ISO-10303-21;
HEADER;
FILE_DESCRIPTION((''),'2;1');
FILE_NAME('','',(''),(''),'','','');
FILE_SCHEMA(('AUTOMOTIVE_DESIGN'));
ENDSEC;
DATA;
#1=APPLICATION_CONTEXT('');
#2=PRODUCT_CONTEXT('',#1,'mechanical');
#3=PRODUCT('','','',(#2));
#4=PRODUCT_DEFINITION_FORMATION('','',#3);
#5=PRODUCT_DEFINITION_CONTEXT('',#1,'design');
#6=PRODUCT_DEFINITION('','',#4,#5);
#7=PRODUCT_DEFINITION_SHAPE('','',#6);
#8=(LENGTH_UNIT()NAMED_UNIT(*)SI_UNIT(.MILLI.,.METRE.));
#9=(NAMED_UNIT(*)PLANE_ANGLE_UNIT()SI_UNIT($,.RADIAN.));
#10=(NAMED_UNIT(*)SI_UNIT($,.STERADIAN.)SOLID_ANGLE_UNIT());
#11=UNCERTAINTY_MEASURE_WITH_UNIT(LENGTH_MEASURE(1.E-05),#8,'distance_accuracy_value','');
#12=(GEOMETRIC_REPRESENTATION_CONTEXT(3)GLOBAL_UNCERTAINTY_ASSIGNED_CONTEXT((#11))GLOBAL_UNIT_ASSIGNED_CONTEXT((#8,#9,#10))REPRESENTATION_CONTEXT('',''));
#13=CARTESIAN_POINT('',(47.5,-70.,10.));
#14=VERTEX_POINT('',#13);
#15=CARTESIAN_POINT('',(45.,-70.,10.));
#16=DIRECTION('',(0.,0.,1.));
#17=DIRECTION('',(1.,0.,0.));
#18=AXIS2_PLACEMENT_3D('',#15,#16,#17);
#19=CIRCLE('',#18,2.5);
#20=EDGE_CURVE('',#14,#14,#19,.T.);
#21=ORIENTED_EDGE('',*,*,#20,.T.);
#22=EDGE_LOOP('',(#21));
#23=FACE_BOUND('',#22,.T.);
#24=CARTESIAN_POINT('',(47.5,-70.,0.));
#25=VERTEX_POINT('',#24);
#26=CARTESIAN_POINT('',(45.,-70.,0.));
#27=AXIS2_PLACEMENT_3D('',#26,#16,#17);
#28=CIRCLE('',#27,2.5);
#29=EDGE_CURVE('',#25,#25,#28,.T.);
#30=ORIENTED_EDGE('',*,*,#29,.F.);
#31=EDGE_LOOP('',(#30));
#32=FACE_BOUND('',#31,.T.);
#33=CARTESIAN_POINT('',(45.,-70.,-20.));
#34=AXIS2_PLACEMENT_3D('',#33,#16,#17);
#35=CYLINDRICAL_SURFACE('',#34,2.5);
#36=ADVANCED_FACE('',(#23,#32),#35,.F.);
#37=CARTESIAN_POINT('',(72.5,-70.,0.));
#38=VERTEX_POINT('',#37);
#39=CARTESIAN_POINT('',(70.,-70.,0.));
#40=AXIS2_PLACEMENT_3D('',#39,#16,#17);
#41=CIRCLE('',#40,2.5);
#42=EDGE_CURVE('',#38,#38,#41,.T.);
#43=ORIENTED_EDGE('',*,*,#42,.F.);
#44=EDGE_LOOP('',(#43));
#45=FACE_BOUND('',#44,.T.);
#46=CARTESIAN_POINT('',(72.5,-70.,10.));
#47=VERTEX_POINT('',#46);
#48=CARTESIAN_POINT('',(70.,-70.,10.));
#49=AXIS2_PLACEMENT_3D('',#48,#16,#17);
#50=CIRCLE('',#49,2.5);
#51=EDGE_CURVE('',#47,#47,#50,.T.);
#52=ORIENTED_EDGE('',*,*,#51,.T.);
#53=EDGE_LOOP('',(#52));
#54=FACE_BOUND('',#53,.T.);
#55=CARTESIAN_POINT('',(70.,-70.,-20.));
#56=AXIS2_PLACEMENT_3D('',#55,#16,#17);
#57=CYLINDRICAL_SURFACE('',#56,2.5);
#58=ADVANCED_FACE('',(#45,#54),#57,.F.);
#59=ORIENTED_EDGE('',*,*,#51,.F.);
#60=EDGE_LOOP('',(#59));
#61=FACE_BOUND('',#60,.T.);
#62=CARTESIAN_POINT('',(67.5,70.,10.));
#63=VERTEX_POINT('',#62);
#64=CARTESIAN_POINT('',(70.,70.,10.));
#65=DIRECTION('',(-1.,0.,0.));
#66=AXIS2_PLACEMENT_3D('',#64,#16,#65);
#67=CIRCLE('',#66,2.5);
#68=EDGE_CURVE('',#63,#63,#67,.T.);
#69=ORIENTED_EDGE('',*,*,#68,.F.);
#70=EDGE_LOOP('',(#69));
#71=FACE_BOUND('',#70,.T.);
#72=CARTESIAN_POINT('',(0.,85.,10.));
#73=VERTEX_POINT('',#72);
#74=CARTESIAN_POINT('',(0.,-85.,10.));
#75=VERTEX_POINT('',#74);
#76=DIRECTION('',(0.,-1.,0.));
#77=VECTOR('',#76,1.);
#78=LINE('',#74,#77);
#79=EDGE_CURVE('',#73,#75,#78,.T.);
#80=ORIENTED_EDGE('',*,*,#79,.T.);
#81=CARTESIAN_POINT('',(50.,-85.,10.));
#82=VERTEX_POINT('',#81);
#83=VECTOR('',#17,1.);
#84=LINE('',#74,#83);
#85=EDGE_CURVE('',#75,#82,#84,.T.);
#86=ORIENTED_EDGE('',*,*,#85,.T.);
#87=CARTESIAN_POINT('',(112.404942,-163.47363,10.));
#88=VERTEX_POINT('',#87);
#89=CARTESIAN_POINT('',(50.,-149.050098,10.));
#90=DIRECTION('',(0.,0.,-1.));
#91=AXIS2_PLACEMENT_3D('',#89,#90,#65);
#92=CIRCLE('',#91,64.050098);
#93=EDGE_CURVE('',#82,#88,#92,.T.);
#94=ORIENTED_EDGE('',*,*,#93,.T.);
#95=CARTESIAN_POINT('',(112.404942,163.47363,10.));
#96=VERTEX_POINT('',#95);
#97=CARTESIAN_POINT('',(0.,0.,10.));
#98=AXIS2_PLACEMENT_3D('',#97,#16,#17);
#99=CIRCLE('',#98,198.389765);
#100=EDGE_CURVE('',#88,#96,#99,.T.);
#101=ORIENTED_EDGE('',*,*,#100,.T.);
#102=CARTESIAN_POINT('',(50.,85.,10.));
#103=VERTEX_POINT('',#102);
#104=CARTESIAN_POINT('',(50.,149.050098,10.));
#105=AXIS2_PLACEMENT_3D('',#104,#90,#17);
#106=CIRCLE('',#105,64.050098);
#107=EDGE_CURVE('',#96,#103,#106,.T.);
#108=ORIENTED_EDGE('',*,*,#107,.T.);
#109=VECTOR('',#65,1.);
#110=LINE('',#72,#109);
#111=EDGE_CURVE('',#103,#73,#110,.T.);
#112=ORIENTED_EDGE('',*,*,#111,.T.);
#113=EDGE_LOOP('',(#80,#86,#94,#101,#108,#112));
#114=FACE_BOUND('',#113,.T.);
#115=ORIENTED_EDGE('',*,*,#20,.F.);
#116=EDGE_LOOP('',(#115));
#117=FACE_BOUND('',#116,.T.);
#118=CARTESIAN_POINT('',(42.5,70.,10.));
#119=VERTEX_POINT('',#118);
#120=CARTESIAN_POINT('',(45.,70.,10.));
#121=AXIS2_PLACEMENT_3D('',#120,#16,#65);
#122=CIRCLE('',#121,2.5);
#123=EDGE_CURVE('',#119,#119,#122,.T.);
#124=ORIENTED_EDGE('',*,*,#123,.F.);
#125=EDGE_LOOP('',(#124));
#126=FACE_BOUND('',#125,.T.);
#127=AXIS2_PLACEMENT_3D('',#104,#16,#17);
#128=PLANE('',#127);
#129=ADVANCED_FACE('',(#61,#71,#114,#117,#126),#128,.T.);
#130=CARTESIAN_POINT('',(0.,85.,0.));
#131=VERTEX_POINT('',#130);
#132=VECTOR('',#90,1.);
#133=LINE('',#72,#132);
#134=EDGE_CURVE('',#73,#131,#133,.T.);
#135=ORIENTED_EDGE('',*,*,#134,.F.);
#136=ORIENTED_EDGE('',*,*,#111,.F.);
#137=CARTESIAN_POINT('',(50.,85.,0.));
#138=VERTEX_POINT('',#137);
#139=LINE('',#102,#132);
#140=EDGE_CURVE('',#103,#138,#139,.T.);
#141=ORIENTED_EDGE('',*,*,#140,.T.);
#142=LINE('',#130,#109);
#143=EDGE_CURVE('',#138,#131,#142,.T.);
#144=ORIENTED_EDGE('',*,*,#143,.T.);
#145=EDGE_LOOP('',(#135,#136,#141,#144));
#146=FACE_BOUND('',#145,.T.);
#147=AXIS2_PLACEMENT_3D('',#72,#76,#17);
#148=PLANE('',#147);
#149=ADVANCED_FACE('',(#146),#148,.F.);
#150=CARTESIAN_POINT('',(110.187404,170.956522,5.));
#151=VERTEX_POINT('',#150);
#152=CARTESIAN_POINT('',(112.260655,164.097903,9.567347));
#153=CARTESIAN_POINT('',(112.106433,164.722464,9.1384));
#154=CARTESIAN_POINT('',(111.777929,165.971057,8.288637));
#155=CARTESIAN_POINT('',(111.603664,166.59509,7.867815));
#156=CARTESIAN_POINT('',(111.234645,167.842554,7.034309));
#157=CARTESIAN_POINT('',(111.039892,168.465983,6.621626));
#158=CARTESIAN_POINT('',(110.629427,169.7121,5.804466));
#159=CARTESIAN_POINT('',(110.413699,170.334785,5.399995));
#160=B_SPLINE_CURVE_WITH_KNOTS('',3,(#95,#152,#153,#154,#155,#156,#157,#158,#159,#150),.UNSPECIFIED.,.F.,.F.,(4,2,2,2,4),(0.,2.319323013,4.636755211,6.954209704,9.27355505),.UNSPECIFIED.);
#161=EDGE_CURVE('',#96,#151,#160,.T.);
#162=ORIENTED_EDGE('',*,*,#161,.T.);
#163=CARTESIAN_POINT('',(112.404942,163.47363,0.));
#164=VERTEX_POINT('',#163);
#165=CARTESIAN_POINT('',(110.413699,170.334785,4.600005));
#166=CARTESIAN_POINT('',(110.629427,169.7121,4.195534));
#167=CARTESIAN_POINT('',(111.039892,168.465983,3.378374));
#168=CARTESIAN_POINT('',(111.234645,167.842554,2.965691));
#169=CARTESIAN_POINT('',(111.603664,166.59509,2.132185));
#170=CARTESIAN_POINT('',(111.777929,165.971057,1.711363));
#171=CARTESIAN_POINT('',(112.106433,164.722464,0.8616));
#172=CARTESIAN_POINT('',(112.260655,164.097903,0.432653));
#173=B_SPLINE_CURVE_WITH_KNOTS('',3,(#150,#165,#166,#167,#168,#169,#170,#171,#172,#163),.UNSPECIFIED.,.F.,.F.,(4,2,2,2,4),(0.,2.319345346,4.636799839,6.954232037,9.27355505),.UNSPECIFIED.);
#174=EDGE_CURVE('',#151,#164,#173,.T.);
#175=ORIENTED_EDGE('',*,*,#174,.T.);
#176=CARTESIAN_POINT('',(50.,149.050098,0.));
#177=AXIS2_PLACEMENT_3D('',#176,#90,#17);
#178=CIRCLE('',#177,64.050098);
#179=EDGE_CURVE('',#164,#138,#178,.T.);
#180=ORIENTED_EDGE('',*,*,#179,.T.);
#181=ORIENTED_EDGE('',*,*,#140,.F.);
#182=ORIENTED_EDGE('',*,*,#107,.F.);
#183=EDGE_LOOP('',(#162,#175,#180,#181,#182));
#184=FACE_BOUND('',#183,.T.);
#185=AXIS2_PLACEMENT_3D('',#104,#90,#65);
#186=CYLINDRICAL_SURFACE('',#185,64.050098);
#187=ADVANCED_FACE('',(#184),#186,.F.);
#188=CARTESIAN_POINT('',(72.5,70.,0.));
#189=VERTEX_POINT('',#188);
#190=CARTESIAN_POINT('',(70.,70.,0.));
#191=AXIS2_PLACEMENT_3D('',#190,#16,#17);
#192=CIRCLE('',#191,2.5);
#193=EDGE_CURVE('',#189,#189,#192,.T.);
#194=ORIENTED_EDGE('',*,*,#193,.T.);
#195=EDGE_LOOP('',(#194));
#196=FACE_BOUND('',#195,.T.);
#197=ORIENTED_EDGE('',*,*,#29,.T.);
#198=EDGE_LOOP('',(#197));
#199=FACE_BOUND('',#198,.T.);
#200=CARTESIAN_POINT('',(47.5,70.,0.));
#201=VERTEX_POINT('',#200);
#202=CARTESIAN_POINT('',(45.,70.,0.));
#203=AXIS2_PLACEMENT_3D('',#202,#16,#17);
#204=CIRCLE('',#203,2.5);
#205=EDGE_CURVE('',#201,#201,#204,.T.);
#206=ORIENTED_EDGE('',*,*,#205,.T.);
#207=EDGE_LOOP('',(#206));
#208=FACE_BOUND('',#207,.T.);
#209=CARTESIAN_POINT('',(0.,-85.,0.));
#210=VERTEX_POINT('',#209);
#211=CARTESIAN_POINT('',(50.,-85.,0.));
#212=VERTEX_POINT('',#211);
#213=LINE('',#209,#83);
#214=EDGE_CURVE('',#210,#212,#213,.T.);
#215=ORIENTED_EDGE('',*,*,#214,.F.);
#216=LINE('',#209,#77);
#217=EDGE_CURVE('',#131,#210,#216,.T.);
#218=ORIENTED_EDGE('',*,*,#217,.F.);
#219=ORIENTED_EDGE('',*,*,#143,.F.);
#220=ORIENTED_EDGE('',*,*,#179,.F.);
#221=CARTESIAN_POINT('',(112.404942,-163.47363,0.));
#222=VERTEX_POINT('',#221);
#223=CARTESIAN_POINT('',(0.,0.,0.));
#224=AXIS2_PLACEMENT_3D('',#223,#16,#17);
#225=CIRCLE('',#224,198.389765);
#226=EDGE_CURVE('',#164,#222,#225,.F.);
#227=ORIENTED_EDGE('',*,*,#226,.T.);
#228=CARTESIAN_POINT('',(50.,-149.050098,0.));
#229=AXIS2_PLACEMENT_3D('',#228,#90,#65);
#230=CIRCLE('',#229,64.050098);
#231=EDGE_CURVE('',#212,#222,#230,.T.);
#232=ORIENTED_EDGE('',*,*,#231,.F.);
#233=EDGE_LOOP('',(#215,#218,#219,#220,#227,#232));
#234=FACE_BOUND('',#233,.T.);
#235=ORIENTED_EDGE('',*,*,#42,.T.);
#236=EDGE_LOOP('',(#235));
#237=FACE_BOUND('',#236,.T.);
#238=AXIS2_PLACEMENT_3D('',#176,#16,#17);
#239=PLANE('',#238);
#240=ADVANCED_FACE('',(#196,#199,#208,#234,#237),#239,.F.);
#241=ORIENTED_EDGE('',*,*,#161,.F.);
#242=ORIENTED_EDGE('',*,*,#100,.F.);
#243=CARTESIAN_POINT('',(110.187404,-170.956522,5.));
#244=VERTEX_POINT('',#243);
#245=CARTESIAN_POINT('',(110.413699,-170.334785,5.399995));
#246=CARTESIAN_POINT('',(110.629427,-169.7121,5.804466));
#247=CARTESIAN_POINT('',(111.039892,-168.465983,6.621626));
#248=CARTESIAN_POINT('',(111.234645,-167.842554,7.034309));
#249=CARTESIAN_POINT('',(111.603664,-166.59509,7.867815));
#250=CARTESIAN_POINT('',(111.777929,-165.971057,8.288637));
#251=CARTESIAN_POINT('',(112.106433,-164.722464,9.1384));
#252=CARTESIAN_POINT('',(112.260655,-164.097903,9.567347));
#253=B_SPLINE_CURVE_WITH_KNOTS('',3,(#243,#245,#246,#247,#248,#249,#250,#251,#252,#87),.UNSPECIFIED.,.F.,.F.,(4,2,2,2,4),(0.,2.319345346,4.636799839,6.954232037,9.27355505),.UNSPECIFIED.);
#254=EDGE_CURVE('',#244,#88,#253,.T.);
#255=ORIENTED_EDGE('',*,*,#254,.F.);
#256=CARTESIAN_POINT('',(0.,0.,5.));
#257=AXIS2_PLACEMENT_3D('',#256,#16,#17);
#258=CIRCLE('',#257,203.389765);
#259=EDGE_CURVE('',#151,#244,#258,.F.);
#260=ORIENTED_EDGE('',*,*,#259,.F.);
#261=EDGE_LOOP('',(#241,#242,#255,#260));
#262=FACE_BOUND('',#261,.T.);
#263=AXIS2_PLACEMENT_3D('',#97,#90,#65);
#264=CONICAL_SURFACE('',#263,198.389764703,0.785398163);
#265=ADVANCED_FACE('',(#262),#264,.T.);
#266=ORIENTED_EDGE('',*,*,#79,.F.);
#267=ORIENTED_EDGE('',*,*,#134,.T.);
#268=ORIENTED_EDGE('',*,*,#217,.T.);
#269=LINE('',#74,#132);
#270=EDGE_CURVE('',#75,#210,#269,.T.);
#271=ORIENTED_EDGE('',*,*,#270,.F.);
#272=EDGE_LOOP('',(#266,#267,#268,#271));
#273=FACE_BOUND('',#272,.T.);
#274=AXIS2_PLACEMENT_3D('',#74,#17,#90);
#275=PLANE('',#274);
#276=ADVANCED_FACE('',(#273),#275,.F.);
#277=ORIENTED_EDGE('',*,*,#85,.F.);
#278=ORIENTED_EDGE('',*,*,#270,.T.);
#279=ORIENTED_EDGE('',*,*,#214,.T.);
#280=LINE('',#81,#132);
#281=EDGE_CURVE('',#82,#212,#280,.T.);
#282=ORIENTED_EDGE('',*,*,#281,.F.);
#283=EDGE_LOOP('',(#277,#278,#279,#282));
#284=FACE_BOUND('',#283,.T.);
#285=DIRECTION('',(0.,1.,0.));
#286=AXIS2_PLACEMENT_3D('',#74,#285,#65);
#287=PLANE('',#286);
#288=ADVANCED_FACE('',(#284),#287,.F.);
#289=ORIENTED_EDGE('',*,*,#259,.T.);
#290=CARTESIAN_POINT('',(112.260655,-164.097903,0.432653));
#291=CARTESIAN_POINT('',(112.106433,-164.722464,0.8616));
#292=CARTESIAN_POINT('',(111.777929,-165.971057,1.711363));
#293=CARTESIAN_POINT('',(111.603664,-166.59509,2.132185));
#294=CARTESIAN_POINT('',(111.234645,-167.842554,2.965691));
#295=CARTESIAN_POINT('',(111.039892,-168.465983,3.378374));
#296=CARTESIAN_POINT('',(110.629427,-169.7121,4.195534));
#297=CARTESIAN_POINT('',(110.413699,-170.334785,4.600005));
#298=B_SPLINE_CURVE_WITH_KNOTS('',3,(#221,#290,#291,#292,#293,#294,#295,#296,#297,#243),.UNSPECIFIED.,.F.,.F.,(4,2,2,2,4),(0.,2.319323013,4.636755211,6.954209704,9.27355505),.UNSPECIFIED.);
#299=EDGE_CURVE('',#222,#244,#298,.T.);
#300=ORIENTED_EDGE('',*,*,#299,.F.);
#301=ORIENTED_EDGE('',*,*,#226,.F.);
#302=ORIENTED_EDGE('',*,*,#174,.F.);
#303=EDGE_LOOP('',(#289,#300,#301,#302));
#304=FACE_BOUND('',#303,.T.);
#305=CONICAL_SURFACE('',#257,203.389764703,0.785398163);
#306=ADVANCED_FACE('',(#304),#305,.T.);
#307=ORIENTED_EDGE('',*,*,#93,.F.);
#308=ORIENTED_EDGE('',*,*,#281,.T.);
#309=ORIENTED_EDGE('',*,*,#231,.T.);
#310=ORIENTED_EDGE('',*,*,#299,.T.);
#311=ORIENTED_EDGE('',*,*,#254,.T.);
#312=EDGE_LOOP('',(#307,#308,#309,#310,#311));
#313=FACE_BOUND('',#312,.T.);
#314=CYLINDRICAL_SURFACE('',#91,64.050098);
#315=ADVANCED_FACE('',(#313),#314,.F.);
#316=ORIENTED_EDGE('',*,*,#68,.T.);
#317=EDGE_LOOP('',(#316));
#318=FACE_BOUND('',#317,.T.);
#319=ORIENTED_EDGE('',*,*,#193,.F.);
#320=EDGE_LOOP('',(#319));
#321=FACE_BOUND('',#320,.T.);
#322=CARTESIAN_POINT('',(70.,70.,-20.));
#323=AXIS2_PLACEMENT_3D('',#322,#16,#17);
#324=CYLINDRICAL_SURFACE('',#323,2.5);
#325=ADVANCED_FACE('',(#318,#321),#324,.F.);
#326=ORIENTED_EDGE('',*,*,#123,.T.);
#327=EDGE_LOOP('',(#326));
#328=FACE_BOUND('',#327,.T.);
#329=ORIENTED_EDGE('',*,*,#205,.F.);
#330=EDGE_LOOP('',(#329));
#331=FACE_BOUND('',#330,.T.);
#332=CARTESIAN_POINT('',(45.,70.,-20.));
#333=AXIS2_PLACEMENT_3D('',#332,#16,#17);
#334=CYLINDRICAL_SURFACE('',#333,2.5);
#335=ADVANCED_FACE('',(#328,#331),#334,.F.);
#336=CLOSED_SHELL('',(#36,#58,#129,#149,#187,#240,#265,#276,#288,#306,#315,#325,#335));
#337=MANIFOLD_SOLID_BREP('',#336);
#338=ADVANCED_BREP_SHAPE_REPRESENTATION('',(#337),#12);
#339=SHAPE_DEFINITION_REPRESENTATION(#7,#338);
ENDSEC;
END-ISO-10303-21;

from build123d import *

# Parameters (mm, degrees)
EXTRUDE_1_DEPTH     = 10
CHAMFER_2_SIZE      = 5
SKETCH_2_R          = 2.5
CUT_EXTRUDE_1_DEPTH = 30


with BuildPart() as part:
    # Эскиз1 → Бобышка-Вытянуть1 (new body)
    with BuildSketch(Plane.XY):
        with BuildLine():
            Line((0, -85), (0, 85))
            Line((0, 85), (50, 85))
            ThreePointArc((50, 85), (102.466768683, 112.312471025), (110.187404416, 170.956521648))
            ThreePointArc((110.187404416, 170.956521648), (203.389764703, 0), (110.187404416, -170.956521648))
            ThreePointArc((110.187404416, -170.956521648), (102.466768683, -112.312471025), (50, -85))
            Line((50, -85), (0, -85))
        make_face()
    extrude(amount=EXTRUDE_1_DEPTH)

    # Фаска2
    chamfer_2_edges = [part.edges().sort_by_distance(p)[0] for p in [
        (203.389764703, 0, 0),
        (203.389764703, 0, 10),
    ]]
    chamfer(chamfer_2_edges, length=CHAMFER_2_SIZE - 0.0001)  # a hair under: the kernel refuses the full size

    # Эскиз2 → Вырез-Вытянуть1 (cut)
    with BuildSketch(Plane.XY.offset(10)):
        with Locations((45, -70)):
            Circle(SKETCH_2_R)
        with Locations((70, -70)):
            Circle(SKETCH_2_R)
        with Locations((70, 70)):
            Circle(SKETCH_2_R)
        with Locations((45, 70)):
            Circle(SKETCH_2_R)
    extrude(amount=-CUT_EXTRUDE_1_DEPTH, mode=Mode.SUBTRACT)


solid = part.part
